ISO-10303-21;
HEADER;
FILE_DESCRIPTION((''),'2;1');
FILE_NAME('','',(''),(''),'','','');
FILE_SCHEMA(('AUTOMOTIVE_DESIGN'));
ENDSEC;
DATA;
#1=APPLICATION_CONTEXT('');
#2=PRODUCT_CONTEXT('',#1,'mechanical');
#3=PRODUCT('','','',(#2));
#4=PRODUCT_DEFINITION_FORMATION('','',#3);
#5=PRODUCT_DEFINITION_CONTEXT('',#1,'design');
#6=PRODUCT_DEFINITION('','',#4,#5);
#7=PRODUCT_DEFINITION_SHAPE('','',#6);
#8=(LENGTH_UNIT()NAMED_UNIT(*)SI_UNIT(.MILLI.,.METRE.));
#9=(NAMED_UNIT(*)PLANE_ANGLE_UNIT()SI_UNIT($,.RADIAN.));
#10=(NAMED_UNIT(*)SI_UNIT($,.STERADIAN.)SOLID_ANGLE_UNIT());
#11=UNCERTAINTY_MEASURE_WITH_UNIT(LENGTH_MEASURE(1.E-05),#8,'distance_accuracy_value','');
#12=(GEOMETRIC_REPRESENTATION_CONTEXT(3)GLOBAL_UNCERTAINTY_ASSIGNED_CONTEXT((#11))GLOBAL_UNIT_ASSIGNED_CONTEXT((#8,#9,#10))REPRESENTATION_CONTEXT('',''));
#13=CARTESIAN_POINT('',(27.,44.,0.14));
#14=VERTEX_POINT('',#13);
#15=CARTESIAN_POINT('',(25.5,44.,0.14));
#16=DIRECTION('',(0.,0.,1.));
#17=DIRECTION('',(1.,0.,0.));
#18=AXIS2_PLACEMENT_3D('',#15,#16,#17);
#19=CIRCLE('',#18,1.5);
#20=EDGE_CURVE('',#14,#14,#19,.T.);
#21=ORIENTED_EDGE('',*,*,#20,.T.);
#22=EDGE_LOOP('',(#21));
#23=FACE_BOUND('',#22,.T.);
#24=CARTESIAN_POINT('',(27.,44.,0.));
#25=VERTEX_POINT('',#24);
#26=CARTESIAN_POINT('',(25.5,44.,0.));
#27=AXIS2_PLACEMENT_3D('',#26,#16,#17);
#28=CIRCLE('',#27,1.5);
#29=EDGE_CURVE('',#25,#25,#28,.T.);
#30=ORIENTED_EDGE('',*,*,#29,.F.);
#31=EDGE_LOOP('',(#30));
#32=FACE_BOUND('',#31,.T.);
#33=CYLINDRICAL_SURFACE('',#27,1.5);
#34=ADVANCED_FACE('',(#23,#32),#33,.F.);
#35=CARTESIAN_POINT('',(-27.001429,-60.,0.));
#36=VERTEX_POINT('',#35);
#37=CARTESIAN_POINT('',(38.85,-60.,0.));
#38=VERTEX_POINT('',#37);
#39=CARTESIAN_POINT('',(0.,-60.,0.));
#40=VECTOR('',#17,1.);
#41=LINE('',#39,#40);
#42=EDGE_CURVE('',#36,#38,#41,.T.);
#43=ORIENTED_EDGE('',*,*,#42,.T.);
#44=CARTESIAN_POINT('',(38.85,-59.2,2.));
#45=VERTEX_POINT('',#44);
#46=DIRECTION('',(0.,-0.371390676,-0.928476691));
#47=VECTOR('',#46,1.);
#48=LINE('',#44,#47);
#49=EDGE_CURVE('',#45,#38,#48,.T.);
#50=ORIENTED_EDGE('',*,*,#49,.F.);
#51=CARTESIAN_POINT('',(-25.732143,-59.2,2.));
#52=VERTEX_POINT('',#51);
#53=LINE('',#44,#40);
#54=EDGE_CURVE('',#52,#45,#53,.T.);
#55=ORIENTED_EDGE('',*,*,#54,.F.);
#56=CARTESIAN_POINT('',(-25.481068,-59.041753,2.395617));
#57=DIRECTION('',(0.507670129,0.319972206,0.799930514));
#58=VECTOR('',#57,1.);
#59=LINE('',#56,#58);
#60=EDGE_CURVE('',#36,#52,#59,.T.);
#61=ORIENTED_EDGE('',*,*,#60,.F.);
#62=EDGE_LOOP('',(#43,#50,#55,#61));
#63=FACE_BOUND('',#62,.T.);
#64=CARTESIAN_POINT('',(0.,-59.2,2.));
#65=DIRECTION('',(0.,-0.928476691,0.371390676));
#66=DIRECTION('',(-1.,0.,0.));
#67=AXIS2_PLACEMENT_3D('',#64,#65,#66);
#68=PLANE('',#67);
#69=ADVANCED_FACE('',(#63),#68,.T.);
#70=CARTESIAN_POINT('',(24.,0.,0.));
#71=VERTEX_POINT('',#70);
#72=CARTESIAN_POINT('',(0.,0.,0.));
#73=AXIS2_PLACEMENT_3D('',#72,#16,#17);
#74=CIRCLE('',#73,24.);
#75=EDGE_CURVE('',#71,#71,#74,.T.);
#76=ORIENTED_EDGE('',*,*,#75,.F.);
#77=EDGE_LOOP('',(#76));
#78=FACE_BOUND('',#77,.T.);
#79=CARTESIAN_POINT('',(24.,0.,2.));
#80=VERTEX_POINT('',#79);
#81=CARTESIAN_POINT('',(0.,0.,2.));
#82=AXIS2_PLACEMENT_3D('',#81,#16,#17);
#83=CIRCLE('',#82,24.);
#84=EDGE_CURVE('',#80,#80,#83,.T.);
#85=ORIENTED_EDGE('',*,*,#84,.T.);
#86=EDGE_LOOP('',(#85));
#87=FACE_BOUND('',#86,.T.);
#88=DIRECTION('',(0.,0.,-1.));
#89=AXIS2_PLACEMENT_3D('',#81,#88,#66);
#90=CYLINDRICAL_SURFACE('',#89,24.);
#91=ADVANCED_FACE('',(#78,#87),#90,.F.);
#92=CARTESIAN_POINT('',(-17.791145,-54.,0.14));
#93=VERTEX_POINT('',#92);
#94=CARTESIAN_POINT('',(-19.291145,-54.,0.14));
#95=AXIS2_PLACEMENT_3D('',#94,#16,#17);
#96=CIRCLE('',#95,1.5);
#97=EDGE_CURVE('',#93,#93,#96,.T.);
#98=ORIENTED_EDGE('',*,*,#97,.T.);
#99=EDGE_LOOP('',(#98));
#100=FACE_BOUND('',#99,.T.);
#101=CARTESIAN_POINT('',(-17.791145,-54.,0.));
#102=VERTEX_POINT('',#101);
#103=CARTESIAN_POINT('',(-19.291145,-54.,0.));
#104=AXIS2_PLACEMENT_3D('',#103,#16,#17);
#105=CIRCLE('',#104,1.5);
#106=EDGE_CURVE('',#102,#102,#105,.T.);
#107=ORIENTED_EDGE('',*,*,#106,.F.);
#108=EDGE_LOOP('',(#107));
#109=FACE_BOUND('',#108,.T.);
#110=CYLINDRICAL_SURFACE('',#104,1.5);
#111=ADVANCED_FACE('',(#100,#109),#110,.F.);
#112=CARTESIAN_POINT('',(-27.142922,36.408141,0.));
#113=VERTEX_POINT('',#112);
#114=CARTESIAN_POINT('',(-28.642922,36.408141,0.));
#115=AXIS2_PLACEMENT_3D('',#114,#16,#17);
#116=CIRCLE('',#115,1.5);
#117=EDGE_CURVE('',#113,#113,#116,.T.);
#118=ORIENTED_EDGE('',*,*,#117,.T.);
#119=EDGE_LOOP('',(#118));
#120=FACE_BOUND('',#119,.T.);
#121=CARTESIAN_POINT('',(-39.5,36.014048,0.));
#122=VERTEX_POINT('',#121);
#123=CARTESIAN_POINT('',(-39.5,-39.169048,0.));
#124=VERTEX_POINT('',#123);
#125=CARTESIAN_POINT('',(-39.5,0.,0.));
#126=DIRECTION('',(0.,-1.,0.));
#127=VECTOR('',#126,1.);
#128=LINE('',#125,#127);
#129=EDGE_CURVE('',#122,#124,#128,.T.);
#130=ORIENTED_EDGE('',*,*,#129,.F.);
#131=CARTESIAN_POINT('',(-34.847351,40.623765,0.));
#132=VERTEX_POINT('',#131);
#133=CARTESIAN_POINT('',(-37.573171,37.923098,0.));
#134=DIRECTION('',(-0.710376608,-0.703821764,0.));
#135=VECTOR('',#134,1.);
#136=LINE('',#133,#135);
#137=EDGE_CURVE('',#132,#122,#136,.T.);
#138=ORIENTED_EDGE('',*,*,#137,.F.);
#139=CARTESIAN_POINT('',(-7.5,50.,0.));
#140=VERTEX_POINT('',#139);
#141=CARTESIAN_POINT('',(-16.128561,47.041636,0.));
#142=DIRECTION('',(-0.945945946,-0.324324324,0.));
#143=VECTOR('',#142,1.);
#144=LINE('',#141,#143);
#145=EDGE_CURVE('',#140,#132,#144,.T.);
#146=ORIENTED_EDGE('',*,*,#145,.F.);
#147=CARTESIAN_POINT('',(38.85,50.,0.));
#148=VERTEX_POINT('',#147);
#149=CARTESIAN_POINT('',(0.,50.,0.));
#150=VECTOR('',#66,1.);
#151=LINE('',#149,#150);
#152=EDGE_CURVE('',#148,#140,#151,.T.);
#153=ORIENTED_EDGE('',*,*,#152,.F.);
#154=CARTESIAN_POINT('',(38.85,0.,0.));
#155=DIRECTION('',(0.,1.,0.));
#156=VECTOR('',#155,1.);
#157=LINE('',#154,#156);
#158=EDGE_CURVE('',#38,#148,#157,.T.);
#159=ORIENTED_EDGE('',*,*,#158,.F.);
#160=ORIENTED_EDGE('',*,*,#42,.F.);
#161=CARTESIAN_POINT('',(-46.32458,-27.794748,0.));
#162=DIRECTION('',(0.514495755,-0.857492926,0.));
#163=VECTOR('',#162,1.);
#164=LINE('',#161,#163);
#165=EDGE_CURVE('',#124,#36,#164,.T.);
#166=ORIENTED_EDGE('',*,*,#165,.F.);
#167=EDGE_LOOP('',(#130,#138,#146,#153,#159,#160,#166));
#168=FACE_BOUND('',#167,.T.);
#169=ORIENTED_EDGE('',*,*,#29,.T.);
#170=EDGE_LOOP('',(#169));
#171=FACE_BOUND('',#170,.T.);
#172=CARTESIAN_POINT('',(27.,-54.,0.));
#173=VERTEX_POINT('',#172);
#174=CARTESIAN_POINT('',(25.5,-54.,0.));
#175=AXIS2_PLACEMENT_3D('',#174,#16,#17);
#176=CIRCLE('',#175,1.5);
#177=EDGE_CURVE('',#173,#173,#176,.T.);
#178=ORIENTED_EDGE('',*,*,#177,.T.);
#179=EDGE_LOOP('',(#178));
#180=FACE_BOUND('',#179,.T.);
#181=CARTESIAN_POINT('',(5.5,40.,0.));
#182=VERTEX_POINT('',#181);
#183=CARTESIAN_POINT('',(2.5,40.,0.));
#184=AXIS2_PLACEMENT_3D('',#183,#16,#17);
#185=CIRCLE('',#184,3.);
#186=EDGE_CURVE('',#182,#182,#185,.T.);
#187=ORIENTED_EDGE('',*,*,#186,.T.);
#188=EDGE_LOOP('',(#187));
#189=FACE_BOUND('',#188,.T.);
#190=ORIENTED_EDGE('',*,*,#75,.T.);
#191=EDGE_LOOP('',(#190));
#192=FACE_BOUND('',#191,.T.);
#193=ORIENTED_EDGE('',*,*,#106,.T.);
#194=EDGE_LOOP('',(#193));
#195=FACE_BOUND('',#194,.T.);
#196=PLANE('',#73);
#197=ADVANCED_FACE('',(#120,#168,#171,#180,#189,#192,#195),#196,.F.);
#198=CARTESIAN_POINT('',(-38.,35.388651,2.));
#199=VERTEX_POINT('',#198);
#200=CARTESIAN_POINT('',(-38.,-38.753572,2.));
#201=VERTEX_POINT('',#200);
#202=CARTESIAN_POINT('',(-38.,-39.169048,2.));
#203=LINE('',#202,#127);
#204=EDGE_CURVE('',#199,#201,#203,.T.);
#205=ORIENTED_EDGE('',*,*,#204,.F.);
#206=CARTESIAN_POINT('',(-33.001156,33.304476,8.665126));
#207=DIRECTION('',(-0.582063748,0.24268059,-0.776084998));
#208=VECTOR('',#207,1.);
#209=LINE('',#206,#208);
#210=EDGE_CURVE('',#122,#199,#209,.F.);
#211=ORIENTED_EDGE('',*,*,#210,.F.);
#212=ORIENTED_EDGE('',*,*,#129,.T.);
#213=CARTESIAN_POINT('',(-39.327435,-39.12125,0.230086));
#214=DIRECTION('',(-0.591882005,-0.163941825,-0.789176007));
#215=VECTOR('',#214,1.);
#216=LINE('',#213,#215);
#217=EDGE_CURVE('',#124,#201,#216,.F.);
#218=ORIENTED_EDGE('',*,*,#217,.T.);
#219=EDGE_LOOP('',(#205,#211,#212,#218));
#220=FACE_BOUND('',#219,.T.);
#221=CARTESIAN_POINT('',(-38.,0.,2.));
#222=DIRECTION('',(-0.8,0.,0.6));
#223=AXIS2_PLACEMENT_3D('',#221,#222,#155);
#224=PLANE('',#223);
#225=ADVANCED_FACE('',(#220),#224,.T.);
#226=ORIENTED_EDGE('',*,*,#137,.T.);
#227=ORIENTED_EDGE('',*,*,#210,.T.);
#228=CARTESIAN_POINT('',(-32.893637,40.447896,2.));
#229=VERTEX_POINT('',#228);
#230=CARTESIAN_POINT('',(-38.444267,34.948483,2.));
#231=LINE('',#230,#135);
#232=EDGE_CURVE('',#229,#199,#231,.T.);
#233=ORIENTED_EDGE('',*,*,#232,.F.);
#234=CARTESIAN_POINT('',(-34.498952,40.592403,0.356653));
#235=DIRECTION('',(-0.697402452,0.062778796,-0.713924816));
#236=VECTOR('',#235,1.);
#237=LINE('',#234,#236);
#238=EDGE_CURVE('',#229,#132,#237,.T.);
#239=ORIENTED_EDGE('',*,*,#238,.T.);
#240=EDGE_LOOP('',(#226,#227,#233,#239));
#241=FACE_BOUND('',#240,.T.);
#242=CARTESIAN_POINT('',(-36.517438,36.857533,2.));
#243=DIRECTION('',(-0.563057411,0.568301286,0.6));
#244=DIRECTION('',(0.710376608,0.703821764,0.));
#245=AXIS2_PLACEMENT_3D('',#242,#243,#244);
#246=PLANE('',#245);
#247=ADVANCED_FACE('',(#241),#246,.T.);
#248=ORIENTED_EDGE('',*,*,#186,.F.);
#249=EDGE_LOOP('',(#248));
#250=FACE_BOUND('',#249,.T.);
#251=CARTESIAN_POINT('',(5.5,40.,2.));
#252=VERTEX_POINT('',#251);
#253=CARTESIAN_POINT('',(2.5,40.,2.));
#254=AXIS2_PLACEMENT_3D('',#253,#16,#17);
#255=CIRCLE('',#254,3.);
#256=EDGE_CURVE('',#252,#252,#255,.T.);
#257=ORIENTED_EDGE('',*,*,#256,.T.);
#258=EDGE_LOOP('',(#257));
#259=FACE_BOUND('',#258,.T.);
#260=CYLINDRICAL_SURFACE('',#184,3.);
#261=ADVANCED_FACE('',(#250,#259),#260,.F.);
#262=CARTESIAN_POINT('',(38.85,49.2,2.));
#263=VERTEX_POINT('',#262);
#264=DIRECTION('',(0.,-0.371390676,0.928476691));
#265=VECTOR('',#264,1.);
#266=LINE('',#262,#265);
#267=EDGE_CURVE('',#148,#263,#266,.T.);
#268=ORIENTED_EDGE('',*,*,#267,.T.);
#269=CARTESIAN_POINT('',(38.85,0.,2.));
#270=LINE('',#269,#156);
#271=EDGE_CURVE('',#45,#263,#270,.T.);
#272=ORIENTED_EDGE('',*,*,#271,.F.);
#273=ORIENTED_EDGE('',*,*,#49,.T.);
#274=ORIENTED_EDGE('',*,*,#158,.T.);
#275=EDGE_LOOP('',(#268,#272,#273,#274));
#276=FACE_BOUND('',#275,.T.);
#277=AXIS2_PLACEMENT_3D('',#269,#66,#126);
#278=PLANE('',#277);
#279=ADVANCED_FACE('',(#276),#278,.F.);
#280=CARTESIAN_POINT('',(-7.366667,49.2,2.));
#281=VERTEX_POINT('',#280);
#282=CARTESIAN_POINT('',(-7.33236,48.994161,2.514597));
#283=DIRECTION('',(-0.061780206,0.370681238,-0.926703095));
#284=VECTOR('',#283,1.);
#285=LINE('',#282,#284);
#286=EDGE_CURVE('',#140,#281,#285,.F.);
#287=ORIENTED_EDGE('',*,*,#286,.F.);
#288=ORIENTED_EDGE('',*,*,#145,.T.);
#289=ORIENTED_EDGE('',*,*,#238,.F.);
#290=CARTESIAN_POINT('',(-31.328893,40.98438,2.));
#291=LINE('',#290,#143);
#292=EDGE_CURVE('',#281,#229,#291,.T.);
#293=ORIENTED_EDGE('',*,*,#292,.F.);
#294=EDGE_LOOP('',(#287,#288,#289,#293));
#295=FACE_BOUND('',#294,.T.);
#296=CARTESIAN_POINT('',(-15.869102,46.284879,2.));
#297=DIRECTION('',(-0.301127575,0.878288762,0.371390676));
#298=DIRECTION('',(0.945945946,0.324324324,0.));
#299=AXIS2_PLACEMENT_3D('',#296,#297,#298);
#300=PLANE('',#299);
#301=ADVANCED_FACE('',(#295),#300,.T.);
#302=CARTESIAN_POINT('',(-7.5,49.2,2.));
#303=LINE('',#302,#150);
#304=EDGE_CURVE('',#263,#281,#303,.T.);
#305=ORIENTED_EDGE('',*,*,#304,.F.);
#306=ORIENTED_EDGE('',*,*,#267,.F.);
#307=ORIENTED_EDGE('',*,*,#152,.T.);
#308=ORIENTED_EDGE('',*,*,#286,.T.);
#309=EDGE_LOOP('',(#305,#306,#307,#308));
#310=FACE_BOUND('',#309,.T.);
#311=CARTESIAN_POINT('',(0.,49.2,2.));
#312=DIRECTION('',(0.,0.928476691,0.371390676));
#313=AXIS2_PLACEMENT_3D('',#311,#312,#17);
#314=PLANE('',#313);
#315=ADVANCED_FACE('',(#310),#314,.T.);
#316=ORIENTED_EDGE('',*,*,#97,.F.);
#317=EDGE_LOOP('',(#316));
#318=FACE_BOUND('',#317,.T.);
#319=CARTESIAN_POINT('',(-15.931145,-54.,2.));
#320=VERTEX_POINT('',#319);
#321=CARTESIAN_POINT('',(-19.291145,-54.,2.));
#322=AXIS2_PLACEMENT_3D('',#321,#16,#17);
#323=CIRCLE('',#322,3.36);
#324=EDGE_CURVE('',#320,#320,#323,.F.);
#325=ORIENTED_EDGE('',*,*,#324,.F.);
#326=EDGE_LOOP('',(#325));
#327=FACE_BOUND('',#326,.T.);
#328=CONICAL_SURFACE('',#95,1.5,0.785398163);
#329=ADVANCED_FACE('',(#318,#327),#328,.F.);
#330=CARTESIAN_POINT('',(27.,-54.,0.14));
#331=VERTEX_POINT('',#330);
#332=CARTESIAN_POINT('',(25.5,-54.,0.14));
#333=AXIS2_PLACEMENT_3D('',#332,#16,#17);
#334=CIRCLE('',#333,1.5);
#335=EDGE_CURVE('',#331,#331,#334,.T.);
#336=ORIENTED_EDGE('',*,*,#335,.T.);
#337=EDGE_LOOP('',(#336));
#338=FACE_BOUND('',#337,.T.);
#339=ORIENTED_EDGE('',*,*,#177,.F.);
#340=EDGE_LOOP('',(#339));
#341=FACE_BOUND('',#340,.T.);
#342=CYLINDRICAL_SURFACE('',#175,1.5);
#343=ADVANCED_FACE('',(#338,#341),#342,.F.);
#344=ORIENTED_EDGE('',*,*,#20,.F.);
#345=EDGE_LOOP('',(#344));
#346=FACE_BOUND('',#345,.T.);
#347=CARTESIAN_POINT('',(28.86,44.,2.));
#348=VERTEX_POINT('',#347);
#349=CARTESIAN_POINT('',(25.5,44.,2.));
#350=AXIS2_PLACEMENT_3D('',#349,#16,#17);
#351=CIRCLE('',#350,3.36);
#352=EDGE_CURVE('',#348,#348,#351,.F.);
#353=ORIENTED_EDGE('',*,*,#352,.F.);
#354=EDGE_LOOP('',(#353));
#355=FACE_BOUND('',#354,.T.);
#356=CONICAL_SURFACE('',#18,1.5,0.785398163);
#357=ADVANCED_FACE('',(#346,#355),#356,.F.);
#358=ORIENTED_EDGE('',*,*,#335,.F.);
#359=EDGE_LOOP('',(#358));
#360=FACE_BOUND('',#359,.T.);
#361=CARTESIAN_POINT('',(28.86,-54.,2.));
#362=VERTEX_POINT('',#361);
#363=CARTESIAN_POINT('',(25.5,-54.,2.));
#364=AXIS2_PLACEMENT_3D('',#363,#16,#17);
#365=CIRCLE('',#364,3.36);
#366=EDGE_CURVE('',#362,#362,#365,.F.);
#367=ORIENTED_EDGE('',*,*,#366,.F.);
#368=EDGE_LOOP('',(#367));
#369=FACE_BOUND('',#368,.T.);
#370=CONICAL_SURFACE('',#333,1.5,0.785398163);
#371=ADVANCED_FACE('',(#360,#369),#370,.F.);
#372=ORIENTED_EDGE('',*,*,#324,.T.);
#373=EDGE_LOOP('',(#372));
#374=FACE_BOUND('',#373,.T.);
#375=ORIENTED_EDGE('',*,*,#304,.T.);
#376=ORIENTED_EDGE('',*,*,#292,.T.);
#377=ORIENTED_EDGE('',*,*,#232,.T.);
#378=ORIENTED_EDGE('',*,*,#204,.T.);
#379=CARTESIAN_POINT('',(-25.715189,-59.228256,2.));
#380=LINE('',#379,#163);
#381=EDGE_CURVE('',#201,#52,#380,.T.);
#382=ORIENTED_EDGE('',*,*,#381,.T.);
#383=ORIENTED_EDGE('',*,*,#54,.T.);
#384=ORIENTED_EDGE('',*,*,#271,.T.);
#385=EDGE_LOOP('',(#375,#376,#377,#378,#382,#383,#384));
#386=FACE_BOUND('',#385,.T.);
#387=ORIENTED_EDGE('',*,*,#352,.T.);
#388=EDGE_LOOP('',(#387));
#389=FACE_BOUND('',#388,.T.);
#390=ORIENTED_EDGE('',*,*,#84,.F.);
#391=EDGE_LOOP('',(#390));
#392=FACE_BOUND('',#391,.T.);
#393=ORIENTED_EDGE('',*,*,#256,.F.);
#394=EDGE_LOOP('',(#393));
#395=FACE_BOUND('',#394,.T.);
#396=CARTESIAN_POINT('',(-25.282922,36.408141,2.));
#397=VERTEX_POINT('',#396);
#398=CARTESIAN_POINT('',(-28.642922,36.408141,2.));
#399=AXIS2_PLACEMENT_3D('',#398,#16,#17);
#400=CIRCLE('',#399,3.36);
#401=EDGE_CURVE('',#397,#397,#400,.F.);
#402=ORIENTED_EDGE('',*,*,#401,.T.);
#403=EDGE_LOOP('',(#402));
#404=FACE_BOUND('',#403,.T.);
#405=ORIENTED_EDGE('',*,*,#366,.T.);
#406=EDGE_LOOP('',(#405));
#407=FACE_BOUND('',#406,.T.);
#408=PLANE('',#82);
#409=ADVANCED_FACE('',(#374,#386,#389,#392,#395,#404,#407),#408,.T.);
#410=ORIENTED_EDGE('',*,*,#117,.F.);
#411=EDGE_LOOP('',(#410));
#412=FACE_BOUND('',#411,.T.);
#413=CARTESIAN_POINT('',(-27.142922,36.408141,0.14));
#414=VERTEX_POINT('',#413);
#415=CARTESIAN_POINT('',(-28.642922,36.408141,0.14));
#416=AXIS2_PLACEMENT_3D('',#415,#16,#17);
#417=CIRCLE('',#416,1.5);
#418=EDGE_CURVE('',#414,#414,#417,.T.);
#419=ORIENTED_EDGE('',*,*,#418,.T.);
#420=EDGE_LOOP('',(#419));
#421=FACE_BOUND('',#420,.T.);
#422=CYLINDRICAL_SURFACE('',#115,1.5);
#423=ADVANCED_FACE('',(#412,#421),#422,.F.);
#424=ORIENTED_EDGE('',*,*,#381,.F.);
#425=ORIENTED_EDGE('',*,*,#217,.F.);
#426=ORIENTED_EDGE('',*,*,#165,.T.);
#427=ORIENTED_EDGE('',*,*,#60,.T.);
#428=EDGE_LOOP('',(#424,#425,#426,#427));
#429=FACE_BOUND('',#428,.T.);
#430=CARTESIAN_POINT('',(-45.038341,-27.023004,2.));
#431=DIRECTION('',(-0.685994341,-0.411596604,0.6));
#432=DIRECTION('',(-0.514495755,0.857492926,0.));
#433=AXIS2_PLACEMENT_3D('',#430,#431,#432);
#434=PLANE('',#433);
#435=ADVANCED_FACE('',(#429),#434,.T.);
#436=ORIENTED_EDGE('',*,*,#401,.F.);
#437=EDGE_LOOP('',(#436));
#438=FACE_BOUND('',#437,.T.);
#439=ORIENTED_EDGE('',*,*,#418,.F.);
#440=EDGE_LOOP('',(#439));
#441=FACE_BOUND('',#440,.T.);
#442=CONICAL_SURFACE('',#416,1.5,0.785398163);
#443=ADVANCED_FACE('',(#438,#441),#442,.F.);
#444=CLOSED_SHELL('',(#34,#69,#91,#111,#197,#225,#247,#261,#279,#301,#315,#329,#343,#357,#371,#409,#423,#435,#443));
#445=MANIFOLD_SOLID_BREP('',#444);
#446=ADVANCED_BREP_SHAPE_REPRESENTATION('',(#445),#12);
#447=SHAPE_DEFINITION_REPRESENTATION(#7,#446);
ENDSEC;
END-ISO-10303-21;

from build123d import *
from OCP.BRepFilletAPI import BRepFilletAPI_MakeChamfer

# Parameters (mm, degrees)
SKETCH1_R           = 24
BOSS_EXTRUDE1_DEPTH = 2
CHAMFER1_SIZE       = 2
CHAMFER1_SIZE_2     = 1.5
SKETCH3_R           = 3
SKETCH3_R_2         = 1.5
CUT_EXTRUDE1_DEPTH  = 2
CHAMFER2_SIZE       = 0.8
CHAMFER2_SIZE_2     = 2
CHAMFER3_SIZE       = 1.86


# Some blends are built 0.0001 mm under size
with BuildPart() as part:
    # Sketch1 → Boss-Extrude1 (new body)
    with BuildSketch(Plane.XY):
        Polygon((38.85, -60), (38.85, 50), (-7.5, 50), (-34.847350762, 40.623765453), (-39.5, 36.014047515), (-39.5, -39.169048105), (-27.001428863, -60), align=None)
        Circle(SKETCH1_R, mode=Mode.SUBTRACT)
    extrude(amount=BOSS_EXTRUDE1_DEPTH)

    # Chamfer1
    chamfer1_edges_1 = [part.edges().sort_by_distance(p)[0] for p in [
        (-39.5, -1.577500295, 2),
    ]]
    chamfer1_side_1 = [part.faces().sort_by_distance(p)[0] for p in [
        (-39.5, -1.577500295, 1.97),
    ]]
    chamfer1_edges_2 = [part.edges().sort_by_distance(p)[0] for p in [
        (-33.250714432, -49.584524053, 2),
    ]]
    chamfer1_side_2 = [part.faces().sort_by_distance(p)[0] for p in [
        (-33.250714432, -49.584524053, 1.97),
    ]]
    chamfer1_edges_3 = [part.edges().sort_by_distance(p)[0] for p in [
        (-37.173675381, 38.318906484, 2),
    ]]
    chamfer1_side_3 = [part.faces().sort_by_distance(p)[0] for p in [
        (-37.173675381, 38.318906484, 1.97),
    ]]
    chamfer1 = BRepFilletAPI_MakeChamfer(part.part.solid().wrapped)
    for e in chamfer1_edges_1:
        chamfer1.Add(CHAMFER1_SIZE - 0.0001, CHAMFER1_SIZE_2 - 0.0001, e.wrapped, chamfer1_side_1[0].wrapped)
    for e in chamfer1_edges_2:
        chamfer1.Add(CHAMFER1_SIZE - 0.0001, CHAMFER1_SIZE_2 - 0.0001, e.wrapped, chamfer1_side_2[0].wrapped)
    for e in chamfer1_edges_3:
        chamfer1.Add(CHAMFER1_SIZE - 0.0001, CHAMFER1_SIZE_2 - 0.0001, e.wrapped, chamfer1_side_3[0].wrapped)
    add(Compound.cast(chamfer1.Shape()), mode=Mode.REPLACE)  # a hair under: the kernel refuses the full size

    # Sketch3 → Cut-Extrude1 (cut)
    with BuildSketch(Plane.XY.offset(2)):
        with Locations((2.5, 40)):
            Circle(SKETCH3_R)
        with Locations((-19.291144984, -54)):
            Circle(SKETCH3_R_2)
        with Locations((25.5, -54)):
            Circle(SKETCH3_R_2)
        with Locations((25.5, 44)):
            Circle(SKETCH3_R_2)
        with Locations((-28.642921649, 36.408141149)):
            Circle(SKETCH3_R_2)
    extrude(amount=-CUT_EXTRUDE1_DEPTH, mode=Mode.SUBTRACT)

    # Chamfer2
    # the kernel refuses this chamfer: 2, 0.8 mm, written as the material it takes off along each edge
    with BuildSketch(Plane(origin=(-30.438487192, -60, 2), x_dir=(0, 0.996016754004022, 0.08916628142572558), z_dir=(1, 0, 0))) as chamfer2_piece_1:
        Polygon((CHAMFER2_SIZE * 0.996016754004, -CHAMFER2_SIZE * 0.0891662814257), (-CHAMFER2_SIZE_2 * 0.0891662814257, -CHAMFER2_SIZE_2 * 0.996016754004), (0, 0), align=None)
    extrude(amount=74.47471447, mode=Mode.SUBTRACT)
    with BuildSketch(Plane(origin=(44.036227278, 50, 2), x_dir=(0, -0.996016754004022, 0.08916628142572558), z_dir=(-1, 0, 0))) as chamfer2_piece_2:
        Polygon((CHAMFER2_SIZE * 0.996016754004, -CHAMFER2_SIZE * 0.0891662814257), (-CHAMFER2_SIZE_2 * 0.0891662814257, -CHAMFER2_SIZE_2 * 0.996016754004), (0, 0), align=None)
    extrude(amount=56.722454557, mode=Mode.SUBTRACT)
    with BuildSketch(Plane(origin=(-2.594109331, 51.682019658, 2), x_dir=(-0.0046450347702198845, 0.013548018079808006, -0.9998974321689664), z_dir=(-0.945945945945946, -0.3243243243243241, 0))) as chamfer2_piece_3:
        Polygon((CHAMFER2_SIZE_2 * 0.999897432169, CHAMFER2_SIZE_2 * 0.0143221905415), (-CHAMFER2_SIZE * 0.0143221905415, CHAMFER2_SIZE * 0.999897432169), (0, 0), align=None)
    extrude(amount=35.83751357, mode=Mode.SUBTRACT)

    # Chamfer3
    chamfer3_edges = [part.edges().sort_by_distance(p)[0] for p in [
        (-20.791144984, -54, 2),
        (24, -54, 2),
        (24, 44, 2),
        (-30.142921649, 36.408141149, 2),
    ]]
    chamfer(chamfer3_edges, length=CHAMFER3_SIZE)


solid = part.part
